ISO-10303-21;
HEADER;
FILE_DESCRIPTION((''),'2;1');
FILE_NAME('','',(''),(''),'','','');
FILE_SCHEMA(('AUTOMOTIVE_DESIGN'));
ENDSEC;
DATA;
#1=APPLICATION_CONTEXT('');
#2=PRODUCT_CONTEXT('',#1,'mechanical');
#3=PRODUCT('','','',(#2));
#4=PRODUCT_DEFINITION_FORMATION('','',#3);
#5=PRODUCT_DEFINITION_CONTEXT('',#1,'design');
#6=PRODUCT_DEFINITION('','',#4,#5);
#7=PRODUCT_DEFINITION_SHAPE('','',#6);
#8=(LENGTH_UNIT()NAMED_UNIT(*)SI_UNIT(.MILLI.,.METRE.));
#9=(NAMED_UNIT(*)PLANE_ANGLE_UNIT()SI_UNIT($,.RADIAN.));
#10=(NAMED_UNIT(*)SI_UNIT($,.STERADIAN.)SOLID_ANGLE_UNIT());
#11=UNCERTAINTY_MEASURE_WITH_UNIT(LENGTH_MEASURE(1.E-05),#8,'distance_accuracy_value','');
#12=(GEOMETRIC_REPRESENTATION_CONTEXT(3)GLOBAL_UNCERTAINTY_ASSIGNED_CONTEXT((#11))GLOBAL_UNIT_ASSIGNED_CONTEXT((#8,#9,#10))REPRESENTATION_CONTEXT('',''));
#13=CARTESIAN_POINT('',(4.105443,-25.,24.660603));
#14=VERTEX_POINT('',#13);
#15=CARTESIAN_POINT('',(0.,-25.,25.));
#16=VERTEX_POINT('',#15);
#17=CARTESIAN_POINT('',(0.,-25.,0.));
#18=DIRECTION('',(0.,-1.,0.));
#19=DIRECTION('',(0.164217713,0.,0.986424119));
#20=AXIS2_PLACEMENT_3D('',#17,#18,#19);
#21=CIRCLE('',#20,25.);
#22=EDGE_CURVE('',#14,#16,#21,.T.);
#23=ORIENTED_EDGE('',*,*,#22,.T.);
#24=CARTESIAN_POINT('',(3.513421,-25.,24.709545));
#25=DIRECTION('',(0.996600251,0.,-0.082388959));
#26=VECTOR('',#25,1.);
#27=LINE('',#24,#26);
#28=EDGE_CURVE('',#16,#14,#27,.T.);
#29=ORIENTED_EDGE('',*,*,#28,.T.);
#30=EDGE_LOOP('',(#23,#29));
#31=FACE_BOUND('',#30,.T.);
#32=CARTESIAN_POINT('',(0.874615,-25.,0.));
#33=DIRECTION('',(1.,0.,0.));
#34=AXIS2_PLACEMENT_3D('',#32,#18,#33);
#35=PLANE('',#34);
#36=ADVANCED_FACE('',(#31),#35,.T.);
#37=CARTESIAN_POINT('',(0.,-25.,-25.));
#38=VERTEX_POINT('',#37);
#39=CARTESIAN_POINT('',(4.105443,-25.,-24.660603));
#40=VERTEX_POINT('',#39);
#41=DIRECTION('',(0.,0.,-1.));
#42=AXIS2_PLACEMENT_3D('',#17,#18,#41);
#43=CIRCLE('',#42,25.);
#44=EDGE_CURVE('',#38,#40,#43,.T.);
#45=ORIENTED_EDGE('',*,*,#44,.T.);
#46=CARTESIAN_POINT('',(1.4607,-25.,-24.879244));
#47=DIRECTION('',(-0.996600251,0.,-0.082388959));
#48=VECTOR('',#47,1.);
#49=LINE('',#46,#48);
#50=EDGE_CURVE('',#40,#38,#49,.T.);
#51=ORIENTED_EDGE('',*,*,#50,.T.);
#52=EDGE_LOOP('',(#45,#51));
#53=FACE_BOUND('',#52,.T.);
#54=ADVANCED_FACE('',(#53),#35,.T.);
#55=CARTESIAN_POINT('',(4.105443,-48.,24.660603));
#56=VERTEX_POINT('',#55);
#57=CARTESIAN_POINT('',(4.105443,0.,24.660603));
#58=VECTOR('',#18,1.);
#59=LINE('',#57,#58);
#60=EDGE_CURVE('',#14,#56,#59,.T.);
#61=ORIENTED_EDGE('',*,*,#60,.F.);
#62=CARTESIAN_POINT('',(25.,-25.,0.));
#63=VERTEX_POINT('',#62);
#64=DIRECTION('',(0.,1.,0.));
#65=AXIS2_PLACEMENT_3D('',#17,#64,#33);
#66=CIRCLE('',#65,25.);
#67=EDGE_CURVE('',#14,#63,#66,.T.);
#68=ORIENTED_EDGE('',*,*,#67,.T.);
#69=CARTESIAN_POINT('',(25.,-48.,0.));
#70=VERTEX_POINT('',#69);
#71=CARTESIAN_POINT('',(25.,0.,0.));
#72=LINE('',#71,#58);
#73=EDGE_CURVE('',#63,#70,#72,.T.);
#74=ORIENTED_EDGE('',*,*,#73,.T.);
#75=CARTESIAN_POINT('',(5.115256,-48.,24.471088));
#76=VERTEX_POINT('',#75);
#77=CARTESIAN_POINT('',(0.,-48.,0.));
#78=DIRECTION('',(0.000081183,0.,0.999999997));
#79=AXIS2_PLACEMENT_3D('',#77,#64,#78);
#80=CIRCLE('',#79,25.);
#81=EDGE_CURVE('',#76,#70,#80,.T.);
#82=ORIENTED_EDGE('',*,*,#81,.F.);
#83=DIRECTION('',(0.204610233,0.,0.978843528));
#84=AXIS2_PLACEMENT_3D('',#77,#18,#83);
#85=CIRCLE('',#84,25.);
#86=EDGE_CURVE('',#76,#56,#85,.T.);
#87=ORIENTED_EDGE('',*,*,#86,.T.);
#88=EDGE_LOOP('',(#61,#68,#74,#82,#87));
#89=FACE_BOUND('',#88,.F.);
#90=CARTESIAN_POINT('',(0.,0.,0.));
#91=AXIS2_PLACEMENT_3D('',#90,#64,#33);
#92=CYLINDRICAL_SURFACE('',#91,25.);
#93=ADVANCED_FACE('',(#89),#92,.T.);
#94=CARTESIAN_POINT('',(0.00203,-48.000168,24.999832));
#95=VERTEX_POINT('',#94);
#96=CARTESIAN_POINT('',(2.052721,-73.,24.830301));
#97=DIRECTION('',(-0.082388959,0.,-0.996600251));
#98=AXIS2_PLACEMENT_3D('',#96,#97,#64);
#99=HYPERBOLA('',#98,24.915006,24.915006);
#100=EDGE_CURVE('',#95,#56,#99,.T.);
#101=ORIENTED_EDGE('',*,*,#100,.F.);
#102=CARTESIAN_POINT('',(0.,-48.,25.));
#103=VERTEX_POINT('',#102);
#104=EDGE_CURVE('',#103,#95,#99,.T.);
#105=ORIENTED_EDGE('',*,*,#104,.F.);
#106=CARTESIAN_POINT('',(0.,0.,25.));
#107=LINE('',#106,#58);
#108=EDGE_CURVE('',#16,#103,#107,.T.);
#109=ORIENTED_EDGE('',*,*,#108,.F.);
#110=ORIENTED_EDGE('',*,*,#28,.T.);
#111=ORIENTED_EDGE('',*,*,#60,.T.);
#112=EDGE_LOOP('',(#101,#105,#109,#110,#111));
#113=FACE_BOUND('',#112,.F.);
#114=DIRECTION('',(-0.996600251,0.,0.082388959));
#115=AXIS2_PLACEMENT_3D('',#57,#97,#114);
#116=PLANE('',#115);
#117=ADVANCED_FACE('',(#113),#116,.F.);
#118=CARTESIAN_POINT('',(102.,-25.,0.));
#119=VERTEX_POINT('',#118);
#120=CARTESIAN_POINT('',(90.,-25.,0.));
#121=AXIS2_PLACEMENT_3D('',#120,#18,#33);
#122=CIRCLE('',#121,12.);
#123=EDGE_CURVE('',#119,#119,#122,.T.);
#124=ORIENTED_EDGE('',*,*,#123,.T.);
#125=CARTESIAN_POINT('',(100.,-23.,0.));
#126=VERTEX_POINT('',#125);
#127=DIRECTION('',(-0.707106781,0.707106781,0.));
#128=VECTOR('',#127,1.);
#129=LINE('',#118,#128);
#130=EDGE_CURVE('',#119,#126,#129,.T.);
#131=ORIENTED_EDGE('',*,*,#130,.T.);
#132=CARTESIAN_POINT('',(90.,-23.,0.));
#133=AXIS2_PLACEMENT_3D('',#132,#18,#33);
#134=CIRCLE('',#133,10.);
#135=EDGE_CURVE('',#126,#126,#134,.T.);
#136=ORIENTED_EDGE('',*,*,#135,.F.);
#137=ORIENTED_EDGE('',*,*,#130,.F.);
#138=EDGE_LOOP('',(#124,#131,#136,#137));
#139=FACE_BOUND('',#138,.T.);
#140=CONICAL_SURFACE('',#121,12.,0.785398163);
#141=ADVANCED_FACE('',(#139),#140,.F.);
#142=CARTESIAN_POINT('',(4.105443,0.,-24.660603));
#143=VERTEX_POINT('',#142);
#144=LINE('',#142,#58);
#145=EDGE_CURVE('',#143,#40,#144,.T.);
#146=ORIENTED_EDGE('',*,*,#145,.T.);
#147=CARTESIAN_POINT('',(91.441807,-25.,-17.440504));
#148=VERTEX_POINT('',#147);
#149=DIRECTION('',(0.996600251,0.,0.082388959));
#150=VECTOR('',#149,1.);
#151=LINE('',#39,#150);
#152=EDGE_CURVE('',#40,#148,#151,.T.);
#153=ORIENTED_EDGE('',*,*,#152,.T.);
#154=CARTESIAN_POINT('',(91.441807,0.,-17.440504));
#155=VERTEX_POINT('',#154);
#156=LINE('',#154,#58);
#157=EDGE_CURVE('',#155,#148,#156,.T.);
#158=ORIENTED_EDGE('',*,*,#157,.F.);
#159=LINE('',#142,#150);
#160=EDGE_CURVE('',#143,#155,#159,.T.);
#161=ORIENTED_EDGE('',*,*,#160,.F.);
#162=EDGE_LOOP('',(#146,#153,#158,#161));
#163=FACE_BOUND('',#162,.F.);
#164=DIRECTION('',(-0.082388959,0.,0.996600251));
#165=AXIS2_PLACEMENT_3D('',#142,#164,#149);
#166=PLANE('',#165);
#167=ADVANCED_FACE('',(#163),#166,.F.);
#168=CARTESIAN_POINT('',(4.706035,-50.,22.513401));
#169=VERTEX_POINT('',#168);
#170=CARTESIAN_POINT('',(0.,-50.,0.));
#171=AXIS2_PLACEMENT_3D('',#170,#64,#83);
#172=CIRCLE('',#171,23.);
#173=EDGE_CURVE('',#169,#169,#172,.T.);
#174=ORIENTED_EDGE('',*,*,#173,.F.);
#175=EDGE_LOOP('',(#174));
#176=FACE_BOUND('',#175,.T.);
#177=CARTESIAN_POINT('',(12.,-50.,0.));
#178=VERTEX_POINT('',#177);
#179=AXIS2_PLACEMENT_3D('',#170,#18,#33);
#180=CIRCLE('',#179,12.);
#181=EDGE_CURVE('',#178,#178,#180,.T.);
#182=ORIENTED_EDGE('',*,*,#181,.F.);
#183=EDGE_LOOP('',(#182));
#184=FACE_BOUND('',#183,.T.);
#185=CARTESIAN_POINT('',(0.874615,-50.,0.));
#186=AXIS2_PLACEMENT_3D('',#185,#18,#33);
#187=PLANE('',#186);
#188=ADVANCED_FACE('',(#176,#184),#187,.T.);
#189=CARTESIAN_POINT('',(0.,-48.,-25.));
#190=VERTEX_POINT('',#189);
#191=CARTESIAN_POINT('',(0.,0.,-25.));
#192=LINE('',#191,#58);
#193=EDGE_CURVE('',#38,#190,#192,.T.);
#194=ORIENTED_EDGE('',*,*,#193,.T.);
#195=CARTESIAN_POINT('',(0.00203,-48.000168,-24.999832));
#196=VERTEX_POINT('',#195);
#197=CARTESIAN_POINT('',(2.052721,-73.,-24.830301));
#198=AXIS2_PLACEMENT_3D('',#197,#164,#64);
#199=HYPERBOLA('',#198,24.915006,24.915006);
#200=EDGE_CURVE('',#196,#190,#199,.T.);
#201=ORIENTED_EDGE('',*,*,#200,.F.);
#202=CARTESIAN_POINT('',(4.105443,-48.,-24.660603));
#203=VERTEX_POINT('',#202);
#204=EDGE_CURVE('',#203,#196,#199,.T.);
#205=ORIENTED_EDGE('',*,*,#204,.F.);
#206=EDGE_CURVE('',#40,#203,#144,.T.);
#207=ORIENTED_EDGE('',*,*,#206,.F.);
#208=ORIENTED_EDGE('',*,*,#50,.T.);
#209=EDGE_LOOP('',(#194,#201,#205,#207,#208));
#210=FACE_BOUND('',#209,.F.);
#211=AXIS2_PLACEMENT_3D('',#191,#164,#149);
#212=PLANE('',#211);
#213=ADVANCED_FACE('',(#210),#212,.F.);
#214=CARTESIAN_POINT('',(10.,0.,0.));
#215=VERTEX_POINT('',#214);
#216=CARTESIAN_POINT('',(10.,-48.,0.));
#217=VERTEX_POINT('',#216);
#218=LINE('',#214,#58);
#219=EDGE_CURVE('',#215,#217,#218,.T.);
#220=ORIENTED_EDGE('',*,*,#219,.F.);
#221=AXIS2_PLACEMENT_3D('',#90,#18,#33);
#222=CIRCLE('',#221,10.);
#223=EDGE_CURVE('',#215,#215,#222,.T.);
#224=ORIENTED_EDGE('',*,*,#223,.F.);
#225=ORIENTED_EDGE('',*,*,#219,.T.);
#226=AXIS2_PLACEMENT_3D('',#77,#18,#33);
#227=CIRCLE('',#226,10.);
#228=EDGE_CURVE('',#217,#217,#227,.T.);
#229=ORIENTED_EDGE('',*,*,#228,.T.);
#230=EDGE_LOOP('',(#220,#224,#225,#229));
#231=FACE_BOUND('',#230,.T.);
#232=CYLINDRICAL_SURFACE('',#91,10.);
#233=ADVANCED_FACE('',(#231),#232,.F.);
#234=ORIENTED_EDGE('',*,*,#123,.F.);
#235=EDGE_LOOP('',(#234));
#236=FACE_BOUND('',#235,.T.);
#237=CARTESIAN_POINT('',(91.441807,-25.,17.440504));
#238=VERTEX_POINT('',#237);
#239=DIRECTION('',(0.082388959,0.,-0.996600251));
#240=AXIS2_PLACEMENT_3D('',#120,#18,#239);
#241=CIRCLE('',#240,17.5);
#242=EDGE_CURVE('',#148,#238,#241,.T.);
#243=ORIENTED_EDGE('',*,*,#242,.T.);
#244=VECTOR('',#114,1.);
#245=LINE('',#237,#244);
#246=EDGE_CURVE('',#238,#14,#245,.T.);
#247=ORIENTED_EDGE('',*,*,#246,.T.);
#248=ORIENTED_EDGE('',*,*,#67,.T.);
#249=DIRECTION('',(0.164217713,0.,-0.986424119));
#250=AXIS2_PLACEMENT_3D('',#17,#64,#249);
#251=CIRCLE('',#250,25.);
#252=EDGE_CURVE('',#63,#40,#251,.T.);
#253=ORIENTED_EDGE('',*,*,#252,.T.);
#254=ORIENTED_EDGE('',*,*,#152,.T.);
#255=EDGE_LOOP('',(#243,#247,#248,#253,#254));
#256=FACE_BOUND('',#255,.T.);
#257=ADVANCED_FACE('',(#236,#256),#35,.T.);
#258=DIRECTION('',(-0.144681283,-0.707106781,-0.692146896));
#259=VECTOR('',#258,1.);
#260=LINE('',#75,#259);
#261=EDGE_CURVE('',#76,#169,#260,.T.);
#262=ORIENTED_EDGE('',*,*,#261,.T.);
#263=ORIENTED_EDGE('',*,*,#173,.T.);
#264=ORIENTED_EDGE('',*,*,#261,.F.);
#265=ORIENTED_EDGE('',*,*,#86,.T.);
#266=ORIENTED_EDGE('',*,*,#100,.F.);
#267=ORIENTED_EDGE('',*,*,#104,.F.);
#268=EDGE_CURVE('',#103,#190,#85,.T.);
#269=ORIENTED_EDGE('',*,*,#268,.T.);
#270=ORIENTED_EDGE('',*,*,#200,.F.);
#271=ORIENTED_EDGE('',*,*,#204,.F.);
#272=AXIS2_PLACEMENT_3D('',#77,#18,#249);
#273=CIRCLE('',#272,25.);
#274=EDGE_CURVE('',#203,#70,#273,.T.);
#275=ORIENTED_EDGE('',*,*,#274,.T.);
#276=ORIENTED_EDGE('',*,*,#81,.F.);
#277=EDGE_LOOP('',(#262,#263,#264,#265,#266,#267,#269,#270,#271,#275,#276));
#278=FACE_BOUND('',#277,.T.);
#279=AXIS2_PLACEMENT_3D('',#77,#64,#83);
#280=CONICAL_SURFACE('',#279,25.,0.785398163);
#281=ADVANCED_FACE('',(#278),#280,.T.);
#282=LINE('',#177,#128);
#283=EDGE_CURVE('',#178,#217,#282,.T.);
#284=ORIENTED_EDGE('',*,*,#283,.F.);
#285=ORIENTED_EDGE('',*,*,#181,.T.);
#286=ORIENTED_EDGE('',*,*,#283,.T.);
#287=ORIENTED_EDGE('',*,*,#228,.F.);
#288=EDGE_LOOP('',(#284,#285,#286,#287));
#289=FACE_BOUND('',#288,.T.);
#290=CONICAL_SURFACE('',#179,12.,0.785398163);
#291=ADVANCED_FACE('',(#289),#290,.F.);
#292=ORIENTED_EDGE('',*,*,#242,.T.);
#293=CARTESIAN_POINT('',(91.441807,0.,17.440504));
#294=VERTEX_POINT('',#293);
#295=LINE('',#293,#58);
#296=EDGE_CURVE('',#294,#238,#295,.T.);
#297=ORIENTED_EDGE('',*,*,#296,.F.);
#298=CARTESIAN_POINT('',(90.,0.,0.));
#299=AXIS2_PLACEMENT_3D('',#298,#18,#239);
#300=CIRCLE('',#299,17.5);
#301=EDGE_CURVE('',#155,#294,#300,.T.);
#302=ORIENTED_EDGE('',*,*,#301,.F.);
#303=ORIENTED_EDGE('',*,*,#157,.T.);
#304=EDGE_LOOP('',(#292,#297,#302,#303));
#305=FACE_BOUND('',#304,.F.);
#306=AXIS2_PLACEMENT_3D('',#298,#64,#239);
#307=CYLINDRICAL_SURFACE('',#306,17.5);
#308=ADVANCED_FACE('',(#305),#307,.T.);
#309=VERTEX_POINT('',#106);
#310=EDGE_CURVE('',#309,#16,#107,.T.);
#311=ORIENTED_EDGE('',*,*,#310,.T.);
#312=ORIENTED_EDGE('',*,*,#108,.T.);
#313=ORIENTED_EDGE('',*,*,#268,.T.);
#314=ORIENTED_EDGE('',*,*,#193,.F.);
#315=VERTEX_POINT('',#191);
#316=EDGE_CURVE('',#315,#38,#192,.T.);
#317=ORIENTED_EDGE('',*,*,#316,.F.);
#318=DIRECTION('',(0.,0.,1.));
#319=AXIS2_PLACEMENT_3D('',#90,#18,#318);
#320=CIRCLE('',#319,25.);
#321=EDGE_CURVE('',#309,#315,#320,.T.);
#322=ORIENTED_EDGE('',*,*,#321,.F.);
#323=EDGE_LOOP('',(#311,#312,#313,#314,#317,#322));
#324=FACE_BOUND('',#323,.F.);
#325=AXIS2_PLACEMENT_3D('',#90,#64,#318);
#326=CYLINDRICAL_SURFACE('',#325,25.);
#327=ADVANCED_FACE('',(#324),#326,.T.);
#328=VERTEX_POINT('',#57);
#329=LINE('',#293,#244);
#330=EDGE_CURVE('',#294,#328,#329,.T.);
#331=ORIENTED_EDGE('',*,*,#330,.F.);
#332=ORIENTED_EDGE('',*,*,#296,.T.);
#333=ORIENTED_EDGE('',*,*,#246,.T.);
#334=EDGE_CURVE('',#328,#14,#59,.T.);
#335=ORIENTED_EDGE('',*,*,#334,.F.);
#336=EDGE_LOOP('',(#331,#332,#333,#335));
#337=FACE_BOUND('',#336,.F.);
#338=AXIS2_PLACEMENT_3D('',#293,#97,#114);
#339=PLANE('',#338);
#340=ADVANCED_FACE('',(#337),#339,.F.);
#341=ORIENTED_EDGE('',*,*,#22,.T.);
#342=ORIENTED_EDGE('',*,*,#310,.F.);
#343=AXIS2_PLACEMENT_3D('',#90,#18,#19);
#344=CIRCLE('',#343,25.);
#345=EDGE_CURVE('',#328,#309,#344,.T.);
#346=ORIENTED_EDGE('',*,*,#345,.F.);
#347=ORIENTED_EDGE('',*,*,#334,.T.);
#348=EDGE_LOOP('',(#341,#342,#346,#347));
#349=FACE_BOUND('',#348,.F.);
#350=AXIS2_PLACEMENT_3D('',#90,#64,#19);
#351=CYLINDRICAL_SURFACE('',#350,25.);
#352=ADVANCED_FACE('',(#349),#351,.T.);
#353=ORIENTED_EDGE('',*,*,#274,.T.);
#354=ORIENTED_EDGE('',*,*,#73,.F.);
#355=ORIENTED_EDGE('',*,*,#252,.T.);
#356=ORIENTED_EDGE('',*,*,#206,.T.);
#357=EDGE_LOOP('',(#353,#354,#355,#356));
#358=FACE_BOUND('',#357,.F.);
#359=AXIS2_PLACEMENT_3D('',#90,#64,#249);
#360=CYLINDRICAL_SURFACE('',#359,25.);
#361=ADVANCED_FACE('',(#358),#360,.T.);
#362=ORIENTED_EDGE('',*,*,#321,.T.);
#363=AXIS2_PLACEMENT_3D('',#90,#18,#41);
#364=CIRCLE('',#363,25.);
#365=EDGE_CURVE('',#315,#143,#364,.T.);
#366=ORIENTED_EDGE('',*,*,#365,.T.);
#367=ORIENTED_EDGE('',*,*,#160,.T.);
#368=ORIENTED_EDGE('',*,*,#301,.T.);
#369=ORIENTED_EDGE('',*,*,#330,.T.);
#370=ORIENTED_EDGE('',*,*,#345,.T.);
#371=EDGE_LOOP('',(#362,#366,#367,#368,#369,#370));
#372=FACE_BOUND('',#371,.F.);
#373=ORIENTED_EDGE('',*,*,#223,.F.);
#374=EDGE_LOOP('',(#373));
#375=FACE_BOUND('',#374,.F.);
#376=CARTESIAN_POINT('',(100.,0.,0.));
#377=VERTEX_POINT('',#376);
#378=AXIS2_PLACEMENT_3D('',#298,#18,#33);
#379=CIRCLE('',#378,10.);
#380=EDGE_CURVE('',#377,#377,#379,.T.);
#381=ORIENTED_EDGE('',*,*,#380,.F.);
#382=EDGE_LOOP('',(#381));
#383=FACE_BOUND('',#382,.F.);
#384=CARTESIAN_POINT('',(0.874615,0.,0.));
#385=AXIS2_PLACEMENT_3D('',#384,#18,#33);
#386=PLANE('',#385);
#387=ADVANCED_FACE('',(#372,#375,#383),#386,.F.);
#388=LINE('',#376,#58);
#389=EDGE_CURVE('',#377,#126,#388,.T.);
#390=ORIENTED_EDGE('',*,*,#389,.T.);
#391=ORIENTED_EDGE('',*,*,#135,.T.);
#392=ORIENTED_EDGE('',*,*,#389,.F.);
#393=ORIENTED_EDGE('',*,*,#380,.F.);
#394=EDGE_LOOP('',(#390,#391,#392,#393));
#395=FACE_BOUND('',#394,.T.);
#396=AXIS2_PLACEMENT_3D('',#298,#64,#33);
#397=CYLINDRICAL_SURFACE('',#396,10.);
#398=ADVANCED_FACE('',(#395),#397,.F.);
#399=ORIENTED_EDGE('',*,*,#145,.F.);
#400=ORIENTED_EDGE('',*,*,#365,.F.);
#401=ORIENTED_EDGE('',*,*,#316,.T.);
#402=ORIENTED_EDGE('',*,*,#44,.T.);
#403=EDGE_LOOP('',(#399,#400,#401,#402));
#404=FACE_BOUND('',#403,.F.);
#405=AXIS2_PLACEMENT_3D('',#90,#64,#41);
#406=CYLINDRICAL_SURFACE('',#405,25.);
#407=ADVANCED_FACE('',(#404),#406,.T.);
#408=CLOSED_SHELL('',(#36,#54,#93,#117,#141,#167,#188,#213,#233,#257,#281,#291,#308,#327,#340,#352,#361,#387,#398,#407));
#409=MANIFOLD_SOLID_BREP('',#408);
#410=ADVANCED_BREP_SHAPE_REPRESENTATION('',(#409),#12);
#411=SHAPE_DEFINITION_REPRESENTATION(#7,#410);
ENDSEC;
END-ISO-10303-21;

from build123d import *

# Parameters (mm, degrees)
F0_R        = 10
F1_DEPTH    = 25
F2_DEPTH    = 50
F3_T4_ANGLE = 203.6133668192
F3_T6_ANGLE = 179.9906971182


# Not quite as in the source:
# - a fillet or chamfer that OpenCascade refuses, or shapes differently, is made with other operations: its cross-section is extruded or revolved along the edge and cut away or added


with BuildPart() as f1:
    # F0 (on Front) → F1 (new body)
    with BuildSketch(Plane.XZ):
        with BuildLine():
            Line((4.1054428346, 24.6606029758), (0, 25))
            ThreePointArc((0, 25), (-25, 0), (0, -25))
            Line((0, -25), (4.1054428346, -24.6606029758))
            ThreePointArc((4.1054428346, -24.6606029758), (19.0740146648, -16.1611251022), (25, 0))
            ThreePointArc((25, 0), (19.0740146648, 16.1611251022), (4.1054428346, 24.6606029758))
        make_face()
        Circle(F0_R, mode=Mode.SUBTRACT)
        with BuildLine():
            ThreePointArc((4.1054428346, 24.6606029758), (2.0597239626, 24.9150062653), (0, 25))
            Line((0, 25), (4.1054428346, 24.6606029758))
        make_face()
        with BuildLine():
            Line((4.1054428346, -24.6606029758), (0, -25))
            ThreePointArc((0, -25), (2.0597239626, -24.9150062653), (4.1054428346, -24.6606029758))
        make_face()
        with BuildLine():
            Line((91.4418067738, 17.4405043857), (4.1054428346, 24.6606029758))
            ThreePointArc((4.1054428346, 24.6606029758), (19.0740146648, 16.1611251022), (25, 0))
            ThreePointArc((25, 0), (19.0740146648, -16.1611251022), (4.1054428346, -24.6606029758))
            Line((4.1054428346, -24.6606029758), (91.4418067738, -17.4405043857))
            ThreePointArc((91.4418067738, -17.4405043857), (72.5, 0), (91.4418067738, 17.4405043857))
        make_face()
        with BuildLine():
            ThreePointArc((107.5, 0), (102.8740362463, 11.8536572723), (91.4418067738, 17.4405043857))
            ThreePointArc((91.4418067738, 17.4405043857), (72.5, 0), (91.4418067738, -17.4405043857))
            ThreePointArc((91.4418067738, -17.4405043857), (102.8740362463, -11.8536572723), (107.5, 0))
        make_face()
        with Locations((90, 0)):
            Circle(F0_R, mode=Mode.SUBTRACT)
    extrude(amount=F1_DEPTH)

    # F0 (on Front) → F2 (join)
    with BuildSketch(Plane.XZ):
        with BuildLine():
            Line((4.1054428346, 24.6606029758), (0, 25))
            ThreePointArc((0, 25), (-25, 0), (0, -25))
            Line((0, -25), (4.1054428346, -24.6606029758))
            ThreePointArc((4.1054428346, -24.6606029758), (19.0740146648, -16.1611251022), (25, 0))
            ThreePointArc((25, 0), (19.0740146648, 16.1611251022), (4.1054428346, 24.6606029758))
        make_face()
        Circle(F0_R, mode=Mode.SUBTRACT)
    extrude(amount=F2_DEPTH)

    # F3: chamfer of 2 on 4 edges, made by hand

    # F3_s1 → F3_t2 (revolve, cut)
    with BuildSketch(Plane.XY):
        Polygon((12, -50), (10, -48), (10, -50), align=None)
    revolve(axis=Axis((0, -50, 0), (0, -1, 0)), mode=Mode.SUBTRACT)

    # F3_s3 → F3_t4 (revolve, cut)
    with BuildSketch(Plane(origin=(0, 0, 0), x_dir=(0, 1, 0), z_dir=(0.9788435281, 0, -0.2046102329))):
        Polygon((-48, 25), (-50, 23), (-50, 25), align=None)
    revolve(axis=Axis((0, -50, 0), (0, -1, 0)), revolution_arc=F3_T4_ANGLE, mode=Mode.SUBTRACT)

    # F3_s5 → F3_t6 (revolve, cut)
    with BuildSketch(Plane(origin=(0, 0, 0), x_dir=(0, 1, 0), z_dir=(-0.9999999967, 0, 8.1183e-05))):
        Polygon((-48, -25), (-50, -23), (-50, -25), align=None)
    revolve(axis=Axis((0, -50, 0), (0, 1, 0)), revolution_arc=F3_T6_ANGLE, mode=Mode.SUBTRACT)

    # F3_s7 → F3_t8 (revolve, cut)
    with BuildSketch(Plane.XY):
        Polygon((102, -25), (100, -23), (100, -25), align=None)
    revolve(axis=Axis((90, -25, 0), (0, -1, 0)), mode=Mode.SUBTRACT)


solid = f1.part
